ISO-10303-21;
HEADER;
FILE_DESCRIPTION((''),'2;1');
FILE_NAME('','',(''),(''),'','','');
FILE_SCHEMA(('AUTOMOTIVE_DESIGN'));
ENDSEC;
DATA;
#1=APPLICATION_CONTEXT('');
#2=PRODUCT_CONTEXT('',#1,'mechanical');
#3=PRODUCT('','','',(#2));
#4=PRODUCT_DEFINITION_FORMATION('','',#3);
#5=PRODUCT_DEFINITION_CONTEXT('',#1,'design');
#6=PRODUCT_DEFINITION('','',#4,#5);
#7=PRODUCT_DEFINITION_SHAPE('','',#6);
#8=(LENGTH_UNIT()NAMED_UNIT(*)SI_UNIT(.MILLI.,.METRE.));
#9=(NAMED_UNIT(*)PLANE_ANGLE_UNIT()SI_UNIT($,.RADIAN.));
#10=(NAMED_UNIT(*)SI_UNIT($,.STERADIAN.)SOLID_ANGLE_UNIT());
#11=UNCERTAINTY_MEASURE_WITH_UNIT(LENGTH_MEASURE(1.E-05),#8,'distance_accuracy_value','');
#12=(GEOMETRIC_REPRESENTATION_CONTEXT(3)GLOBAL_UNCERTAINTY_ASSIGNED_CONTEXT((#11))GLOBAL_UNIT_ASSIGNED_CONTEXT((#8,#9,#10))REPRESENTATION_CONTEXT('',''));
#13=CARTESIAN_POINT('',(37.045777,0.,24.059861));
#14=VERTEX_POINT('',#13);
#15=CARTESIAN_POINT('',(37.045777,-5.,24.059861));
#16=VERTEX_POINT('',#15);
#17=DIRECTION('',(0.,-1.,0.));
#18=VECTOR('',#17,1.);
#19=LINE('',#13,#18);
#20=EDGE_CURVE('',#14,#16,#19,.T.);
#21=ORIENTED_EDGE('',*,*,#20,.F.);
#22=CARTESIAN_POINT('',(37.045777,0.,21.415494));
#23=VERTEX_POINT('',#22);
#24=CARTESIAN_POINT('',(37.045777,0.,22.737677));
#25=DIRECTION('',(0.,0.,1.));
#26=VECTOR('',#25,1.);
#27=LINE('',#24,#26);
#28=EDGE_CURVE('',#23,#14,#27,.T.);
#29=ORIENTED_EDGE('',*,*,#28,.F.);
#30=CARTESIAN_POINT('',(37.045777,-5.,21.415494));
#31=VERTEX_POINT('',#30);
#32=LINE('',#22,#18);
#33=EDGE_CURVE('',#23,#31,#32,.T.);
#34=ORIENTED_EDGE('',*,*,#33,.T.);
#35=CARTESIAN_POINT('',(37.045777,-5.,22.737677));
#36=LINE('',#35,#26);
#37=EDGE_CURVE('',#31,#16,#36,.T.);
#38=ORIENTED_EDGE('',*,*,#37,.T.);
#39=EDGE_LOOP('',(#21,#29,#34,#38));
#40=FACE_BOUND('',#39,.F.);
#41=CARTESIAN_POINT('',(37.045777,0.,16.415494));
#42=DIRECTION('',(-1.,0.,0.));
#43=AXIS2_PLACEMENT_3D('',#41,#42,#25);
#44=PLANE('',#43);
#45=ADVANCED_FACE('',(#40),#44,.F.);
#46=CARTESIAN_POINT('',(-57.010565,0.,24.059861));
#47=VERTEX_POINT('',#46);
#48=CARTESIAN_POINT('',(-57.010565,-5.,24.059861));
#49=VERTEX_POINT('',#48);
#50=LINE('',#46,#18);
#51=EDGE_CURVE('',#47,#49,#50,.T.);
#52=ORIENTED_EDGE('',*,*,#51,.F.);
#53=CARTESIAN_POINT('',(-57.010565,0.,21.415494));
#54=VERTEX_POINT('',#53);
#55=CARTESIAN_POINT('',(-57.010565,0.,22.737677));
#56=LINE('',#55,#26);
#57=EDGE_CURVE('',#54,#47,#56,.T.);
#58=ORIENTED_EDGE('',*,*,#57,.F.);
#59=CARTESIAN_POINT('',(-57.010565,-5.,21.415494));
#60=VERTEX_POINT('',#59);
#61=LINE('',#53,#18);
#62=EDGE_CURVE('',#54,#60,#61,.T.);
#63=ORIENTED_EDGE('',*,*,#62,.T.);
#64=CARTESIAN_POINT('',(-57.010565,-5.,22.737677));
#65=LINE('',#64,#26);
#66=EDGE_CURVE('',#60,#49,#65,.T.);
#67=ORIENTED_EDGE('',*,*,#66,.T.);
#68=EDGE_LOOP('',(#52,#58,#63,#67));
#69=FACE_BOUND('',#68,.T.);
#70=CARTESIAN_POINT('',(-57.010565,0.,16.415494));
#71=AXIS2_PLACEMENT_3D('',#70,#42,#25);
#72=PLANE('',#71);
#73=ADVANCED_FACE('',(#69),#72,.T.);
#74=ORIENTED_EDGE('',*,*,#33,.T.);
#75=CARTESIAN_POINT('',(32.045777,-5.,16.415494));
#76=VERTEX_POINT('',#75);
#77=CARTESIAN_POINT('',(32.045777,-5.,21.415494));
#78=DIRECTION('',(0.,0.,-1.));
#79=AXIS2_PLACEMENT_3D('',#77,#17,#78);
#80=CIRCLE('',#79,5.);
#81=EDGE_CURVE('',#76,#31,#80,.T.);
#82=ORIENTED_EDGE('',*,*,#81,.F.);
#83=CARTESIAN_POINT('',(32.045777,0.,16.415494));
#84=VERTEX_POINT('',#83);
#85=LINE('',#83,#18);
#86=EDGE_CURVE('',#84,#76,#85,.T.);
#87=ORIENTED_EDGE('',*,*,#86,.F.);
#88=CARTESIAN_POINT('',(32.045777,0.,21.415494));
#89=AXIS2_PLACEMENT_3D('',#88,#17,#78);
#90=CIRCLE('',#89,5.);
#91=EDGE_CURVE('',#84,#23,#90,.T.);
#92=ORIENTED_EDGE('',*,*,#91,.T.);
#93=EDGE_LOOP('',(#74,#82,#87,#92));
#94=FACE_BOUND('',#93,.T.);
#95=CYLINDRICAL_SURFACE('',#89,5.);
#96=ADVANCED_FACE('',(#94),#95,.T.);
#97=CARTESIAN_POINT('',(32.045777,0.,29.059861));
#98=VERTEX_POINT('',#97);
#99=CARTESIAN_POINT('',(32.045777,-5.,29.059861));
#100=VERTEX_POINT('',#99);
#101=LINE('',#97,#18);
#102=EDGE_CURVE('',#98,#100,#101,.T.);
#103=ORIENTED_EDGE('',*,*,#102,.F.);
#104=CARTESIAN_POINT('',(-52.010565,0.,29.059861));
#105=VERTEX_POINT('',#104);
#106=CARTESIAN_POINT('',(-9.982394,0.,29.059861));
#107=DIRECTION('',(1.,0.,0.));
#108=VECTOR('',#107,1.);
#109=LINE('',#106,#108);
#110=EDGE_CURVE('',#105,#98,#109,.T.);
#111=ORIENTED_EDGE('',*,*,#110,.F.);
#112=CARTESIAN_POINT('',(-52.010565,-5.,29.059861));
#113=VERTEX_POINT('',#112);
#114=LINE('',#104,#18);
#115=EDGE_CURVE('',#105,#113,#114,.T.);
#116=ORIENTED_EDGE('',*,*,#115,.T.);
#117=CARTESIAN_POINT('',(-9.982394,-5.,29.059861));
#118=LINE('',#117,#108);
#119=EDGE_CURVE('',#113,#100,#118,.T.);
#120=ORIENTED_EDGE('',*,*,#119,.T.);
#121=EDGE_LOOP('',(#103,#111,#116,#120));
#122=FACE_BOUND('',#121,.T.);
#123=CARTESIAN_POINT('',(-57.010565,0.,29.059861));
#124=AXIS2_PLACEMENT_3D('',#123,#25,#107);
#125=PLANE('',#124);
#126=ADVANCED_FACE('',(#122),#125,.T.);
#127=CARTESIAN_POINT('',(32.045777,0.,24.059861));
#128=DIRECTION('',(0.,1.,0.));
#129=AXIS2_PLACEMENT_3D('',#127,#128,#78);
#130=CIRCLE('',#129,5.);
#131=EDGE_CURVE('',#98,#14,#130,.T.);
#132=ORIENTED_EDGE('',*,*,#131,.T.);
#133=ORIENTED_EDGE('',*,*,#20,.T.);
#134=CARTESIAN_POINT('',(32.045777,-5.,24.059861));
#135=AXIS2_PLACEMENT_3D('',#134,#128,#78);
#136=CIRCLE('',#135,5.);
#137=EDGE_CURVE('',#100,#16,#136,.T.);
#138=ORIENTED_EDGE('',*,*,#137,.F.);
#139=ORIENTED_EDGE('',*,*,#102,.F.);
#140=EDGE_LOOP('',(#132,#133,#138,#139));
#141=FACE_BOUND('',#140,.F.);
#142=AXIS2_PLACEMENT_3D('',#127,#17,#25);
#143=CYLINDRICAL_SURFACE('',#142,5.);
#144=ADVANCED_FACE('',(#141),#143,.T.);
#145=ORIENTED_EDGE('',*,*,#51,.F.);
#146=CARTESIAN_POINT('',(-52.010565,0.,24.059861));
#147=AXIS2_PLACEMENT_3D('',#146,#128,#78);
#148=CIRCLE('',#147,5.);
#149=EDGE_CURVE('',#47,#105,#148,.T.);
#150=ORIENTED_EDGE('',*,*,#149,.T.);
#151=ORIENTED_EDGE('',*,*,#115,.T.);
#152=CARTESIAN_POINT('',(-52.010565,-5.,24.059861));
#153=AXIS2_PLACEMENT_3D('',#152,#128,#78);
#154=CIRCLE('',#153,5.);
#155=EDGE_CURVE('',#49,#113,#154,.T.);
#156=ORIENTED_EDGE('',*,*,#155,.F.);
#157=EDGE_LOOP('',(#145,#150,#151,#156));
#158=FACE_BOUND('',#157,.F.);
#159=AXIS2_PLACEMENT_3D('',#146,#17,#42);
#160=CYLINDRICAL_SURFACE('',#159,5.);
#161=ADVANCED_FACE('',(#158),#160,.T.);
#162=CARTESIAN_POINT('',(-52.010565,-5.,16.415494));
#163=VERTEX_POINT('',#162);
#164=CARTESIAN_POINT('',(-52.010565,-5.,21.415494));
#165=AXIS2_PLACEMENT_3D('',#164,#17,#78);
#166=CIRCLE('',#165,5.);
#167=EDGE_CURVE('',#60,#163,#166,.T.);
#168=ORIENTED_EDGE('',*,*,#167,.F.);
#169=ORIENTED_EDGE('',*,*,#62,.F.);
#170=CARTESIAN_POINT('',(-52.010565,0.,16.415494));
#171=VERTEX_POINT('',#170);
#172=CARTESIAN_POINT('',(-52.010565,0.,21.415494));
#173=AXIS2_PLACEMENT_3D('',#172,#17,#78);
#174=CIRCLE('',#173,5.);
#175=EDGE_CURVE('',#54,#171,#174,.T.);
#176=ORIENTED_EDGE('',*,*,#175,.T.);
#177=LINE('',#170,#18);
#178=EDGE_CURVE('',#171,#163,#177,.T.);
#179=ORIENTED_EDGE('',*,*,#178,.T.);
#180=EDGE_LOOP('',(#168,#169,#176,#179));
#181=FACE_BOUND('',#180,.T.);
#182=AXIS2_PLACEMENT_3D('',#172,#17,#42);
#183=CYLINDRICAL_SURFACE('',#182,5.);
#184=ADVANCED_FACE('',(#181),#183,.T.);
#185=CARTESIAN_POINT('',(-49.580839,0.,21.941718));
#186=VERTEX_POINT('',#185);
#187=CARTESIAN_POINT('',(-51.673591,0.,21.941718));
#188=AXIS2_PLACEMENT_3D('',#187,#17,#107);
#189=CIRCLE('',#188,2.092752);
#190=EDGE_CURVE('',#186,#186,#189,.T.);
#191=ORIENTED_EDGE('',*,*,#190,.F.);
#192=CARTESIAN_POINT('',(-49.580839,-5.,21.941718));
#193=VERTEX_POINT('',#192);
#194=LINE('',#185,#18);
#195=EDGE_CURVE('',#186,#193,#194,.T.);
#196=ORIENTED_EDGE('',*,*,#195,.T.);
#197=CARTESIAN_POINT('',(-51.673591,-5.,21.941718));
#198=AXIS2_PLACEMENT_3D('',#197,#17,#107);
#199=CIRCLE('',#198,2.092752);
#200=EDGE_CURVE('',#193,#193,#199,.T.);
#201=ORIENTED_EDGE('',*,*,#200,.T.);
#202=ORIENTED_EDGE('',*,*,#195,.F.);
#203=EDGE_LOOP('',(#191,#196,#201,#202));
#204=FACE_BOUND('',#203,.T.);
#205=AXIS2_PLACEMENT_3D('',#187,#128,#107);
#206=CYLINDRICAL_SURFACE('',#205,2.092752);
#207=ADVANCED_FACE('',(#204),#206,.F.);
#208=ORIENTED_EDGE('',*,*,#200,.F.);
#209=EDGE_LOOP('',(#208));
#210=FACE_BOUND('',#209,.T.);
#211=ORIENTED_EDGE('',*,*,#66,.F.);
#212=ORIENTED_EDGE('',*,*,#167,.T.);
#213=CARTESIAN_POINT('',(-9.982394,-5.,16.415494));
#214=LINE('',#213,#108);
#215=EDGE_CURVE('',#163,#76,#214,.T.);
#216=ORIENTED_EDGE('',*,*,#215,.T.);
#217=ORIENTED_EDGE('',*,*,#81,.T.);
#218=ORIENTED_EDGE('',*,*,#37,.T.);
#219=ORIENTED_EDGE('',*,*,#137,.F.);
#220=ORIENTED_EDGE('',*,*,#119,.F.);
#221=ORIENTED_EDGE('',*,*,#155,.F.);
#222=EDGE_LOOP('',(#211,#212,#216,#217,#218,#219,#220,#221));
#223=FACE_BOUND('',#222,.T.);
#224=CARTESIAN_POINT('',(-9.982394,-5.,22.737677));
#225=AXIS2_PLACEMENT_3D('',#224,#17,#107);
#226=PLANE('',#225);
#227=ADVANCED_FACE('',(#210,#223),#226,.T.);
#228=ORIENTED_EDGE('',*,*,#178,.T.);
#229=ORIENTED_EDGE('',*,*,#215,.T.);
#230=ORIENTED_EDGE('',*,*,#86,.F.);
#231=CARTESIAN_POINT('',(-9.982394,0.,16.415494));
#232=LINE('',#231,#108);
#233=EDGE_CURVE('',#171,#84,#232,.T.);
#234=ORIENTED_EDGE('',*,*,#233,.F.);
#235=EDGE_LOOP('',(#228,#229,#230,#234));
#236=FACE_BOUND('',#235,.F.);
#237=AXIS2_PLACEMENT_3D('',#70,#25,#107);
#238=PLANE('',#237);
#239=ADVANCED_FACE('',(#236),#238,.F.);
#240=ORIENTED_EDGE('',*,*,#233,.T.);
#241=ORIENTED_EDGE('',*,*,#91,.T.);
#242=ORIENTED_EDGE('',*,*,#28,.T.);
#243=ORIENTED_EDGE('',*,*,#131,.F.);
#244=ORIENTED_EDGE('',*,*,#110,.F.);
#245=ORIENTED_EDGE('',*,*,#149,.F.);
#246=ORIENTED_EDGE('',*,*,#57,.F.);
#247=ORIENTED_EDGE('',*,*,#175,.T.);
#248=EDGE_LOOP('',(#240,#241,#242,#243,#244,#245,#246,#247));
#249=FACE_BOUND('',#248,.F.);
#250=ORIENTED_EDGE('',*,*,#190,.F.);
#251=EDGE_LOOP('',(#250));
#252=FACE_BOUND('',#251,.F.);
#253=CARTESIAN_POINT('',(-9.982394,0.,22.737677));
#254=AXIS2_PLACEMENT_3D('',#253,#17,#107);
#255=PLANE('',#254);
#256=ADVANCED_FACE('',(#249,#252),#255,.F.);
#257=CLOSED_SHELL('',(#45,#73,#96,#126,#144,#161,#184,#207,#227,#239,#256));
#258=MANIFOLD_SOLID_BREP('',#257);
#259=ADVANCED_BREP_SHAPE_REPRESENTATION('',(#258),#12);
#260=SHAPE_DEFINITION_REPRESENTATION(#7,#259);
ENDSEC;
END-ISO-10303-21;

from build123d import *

# Parameters (mm, degrees)
F0_W     = 94.0563417971
F0_H     = 12.6443672925
F0_R     = 2.0927521529
F1_DEPTH = 5
F2_R     = 5


# Not quite as in the source:
# - the program builds the solid bodies; features that only make, move or delete a surface that nothing else refers to are left out


with BuildPart() as f1:
    # F0 (on Front) → F1 (new body)
    with BuildSketch(Plane.XZ):
        with Locations((-9.9823940545, 22.7376772091)):
            Rectangle(F0_W, F0_H)
        with Locations((-51.6735911369, 21.9417177141)):
            Circle(F0_R, mode=Mode.SUBTRACT)
    extrude(amount=F1_DEPTH)

    # F2
    f2_edges = [f1.edges().sort_by_distance(p)[0] for p in [
        (37.045777, -2.5, 29.059861),
        (37.045777, -2.5, 16.415494),
        (-57.010565, -2.5, 16.415494),
        (-57.010565, -2.5, 29.059861),
    ]]
    fillet(f2_edges, radius=F2_R)


solid = f1.part
